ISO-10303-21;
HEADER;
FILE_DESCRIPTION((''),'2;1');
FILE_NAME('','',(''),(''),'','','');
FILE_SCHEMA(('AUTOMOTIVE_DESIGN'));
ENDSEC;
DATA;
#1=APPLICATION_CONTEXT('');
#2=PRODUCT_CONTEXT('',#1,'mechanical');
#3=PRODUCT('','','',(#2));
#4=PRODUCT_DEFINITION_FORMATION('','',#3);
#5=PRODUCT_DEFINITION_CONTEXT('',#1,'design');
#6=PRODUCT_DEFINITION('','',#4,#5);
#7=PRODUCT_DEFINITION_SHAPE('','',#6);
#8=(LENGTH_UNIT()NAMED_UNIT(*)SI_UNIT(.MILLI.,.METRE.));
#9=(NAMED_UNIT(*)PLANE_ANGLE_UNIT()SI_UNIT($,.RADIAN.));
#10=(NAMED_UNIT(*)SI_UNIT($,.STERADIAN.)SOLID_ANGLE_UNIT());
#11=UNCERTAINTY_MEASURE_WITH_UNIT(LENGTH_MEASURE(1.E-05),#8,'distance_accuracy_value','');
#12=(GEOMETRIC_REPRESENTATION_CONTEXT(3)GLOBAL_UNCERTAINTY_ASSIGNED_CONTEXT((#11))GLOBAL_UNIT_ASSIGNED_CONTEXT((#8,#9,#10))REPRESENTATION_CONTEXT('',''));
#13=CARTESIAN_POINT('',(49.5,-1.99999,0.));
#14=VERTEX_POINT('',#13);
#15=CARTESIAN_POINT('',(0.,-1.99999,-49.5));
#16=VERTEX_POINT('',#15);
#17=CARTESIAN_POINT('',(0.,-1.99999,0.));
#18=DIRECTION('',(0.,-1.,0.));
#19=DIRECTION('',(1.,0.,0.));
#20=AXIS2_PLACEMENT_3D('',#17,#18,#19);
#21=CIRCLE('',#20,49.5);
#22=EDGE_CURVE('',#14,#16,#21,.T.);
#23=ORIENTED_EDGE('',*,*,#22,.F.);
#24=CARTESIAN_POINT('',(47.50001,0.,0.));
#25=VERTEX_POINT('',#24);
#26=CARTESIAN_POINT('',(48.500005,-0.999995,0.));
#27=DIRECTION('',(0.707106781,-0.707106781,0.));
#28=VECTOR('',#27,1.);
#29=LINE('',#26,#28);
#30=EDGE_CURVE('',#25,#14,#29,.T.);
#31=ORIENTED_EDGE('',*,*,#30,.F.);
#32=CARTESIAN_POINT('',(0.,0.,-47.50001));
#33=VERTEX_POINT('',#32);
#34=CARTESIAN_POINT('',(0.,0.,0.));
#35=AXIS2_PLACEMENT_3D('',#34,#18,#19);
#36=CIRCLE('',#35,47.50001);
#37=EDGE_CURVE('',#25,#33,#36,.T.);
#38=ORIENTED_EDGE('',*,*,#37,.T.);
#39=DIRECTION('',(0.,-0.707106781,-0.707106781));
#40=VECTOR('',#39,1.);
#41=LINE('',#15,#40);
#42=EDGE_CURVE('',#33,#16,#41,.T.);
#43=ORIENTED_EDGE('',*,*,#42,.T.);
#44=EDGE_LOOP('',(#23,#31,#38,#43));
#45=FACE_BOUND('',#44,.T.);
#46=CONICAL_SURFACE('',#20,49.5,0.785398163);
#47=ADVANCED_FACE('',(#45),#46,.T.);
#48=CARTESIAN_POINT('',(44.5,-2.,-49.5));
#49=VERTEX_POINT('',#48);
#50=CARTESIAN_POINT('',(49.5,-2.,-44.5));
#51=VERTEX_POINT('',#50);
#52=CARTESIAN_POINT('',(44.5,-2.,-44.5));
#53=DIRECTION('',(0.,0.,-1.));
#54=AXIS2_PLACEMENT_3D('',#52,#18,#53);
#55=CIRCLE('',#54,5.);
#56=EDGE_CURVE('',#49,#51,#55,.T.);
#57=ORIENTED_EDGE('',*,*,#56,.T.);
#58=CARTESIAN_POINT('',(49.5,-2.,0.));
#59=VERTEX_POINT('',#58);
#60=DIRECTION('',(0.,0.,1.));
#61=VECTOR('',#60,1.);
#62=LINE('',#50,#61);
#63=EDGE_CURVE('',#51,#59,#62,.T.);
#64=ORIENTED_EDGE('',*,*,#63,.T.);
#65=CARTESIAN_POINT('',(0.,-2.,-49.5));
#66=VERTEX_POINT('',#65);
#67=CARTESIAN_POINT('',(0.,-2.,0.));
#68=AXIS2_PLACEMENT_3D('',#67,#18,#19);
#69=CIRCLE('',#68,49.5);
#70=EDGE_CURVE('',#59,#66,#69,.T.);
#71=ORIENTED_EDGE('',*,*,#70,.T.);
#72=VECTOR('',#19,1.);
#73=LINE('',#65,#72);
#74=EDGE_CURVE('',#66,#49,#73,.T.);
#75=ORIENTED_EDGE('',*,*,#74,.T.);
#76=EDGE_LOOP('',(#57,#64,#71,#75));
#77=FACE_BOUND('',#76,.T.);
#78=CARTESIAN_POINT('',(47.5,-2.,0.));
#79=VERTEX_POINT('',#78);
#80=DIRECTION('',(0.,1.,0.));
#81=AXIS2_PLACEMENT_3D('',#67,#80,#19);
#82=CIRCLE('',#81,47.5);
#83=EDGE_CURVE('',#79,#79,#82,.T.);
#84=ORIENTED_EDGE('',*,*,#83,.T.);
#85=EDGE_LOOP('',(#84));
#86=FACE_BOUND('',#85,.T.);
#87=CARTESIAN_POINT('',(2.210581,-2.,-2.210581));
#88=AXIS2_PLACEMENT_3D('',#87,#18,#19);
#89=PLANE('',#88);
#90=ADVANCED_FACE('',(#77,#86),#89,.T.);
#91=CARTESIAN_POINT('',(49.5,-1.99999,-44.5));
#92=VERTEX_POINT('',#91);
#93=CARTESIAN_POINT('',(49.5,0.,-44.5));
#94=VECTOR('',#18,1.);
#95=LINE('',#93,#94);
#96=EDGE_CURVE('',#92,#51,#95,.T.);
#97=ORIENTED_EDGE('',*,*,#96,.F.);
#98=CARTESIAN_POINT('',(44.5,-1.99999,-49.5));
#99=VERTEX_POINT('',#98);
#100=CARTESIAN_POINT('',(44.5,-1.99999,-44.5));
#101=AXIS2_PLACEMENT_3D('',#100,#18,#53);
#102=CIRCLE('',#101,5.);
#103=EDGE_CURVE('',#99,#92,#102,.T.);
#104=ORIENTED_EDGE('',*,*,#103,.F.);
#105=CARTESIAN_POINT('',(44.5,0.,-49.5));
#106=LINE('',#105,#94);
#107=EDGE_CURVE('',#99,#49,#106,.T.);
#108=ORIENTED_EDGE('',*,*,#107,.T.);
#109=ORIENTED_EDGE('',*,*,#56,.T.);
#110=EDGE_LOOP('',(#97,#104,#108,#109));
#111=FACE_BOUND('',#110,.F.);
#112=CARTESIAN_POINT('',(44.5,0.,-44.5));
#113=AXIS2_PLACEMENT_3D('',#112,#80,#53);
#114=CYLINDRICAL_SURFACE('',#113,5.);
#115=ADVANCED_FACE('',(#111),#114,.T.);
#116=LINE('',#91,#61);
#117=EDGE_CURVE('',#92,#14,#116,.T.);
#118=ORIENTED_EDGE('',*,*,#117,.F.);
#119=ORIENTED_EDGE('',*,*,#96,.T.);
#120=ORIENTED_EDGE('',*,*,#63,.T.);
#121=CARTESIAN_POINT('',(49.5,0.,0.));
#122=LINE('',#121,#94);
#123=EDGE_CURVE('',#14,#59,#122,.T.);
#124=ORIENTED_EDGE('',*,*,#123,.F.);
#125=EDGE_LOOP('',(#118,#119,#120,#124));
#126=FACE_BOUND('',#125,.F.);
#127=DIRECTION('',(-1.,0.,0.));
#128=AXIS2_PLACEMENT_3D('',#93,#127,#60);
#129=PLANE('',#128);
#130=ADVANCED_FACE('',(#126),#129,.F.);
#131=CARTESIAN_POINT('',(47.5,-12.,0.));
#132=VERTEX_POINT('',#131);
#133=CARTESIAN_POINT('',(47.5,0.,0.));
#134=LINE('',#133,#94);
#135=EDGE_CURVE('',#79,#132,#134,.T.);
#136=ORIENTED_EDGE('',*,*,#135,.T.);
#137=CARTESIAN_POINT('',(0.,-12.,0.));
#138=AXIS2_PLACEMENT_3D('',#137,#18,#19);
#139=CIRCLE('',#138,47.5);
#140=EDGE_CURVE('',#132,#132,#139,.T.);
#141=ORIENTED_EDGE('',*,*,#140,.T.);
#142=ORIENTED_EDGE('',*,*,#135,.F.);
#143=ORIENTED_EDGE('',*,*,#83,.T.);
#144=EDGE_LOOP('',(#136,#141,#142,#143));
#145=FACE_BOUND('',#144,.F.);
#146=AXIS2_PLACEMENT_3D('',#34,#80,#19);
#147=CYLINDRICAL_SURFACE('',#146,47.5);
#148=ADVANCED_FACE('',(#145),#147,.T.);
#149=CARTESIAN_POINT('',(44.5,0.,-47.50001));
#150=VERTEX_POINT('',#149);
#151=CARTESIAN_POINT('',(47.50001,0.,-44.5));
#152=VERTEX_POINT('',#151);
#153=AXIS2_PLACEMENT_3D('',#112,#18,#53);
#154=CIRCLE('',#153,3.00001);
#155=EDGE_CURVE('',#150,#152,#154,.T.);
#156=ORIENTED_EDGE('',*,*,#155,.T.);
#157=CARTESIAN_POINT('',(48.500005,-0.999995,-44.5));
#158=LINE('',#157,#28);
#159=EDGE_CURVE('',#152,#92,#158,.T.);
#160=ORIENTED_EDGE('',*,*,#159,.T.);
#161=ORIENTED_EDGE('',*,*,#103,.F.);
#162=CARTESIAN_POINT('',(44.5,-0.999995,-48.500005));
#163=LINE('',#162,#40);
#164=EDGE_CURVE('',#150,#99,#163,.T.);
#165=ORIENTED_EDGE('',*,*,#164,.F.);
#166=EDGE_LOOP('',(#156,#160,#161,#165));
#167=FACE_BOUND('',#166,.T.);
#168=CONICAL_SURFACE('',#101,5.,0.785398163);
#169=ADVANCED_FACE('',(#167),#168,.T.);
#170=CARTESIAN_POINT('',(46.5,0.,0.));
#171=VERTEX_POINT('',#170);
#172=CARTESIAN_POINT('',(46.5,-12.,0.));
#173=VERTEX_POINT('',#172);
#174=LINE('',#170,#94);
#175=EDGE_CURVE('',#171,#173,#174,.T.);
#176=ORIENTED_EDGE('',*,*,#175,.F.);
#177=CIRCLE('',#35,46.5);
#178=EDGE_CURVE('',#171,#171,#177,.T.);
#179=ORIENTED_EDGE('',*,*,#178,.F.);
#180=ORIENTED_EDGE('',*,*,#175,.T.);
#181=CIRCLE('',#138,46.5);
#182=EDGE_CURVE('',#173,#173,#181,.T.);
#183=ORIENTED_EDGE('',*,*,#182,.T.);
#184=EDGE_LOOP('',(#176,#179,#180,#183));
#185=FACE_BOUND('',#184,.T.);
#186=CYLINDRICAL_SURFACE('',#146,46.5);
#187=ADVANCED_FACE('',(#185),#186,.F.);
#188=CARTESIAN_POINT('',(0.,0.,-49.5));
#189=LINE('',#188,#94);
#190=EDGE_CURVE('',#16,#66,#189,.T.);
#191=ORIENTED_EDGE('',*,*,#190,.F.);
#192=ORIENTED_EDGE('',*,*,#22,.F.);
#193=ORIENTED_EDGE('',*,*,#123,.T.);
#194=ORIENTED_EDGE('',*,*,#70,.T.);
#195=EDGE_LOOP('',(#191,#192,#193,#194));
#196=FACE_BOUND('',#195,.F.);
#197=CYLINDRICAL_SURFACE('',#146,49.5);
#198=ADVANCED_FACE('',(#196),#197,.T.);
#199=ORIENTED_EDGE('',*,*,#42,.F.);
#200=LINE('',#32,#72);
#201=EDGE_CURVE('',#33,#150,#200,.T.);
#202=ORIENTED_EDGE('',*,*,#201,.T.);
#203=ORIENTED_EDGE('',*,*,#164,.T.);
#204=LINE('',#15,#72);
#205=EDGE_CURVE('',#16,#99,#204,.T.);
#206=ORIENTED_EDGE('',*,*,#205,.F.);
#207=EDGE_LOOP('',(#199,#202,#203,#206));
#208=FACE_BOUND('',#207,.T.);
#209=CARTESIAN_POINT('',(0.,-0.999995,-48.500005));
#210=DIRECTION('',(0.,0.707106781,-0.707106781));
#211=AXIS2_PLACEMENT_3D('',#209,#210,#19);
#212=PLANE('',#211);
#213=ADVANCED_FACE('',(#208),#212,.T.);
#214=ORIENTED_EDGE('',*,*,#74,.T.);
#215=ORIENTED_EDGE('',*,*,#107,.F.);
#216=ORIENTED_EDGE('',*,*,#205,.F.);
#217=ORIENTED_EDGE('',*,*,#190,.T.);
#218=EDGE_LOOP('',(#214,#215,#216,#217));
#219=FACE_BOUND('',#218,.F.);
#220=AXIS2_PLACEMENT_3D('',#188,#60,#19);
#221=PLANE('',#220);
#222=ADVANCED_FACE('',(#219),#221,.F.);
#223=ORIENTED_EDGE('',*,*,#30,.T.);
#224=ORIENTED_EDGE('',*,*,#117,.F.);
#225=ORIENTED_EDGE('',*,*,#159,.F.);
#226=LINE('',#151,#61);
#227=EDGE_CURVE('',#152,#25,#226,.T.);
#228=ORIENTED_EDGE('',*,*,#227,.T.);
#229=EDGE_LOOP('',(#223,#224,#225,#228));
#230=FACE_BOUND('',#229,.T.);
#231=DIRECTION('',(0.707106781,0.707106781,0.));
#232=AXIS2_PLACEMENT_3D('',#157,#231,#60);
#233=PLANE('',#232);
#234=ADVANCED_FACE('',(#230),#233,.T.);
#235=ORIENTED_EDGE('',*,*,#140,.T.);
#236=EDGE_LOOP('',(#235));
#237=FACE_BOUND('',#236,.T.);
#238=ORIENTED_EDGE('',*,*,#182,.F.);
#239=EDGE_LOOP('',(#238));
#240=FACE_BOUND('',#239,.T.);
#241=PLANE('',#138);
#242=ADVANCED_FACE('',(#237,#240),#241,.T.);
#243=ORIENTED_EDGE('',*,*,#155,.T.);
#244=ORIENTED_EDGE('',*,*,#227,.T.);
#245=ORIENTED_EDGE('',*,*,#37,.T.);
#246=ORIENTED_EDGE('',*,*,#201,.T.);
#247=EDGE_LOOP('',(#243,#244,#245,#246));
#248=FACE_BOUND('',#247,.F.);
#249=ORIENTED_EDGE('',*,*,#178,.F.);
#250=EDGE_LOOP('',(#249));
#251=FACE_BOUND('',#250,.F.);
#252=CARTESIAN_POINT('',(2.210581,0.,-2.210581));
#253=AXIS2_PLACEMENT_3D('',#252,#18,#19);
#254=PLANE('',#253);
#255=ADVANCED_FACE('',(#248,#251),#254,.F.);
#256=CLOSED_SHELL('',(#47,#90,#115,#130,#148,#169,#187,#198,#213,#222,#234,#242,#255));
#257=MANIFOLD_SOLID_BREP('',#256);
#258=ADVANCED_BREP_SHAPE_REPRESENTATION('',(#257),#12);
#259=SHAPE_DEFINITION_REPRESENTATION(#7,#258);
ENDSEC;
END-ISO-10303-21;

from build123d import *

# Parameters (mm, degrees)
F0_R     = 47.5
F0_R_2   = 46.5
F1_DEPTH = 2
F2_DEPTH = 12
F3_SIZE  = 1.99999


# Not quite as in the source:
# - a fillet or chamfer is up to 0.001 mm smaller than in the source, because OpenCascade refuses the exact size


with BuildPart() as f1:
    # F0 (on Front) → F1 (new body)
    with BuildSketch(Plane.XZ):
        with BuildLine():
            ThreePointArc((0, -49.5), (35.0017856687, -35.0017856687), (49.5, 0))
            ThreePointArc((49.5, 0), (-35.0017856687, 35.0017856687), (0, -49.5))
        make_face()
        Circle(F0_R, mode=Mode.SUBTRACT)
        Circle(F0_R)
        Circle(F0_R_2, mode=Mode.SUBTRACT)
        with BuildLine():
            Line((49.5, -44.5), (49.5, 0))
            ThreePointArc((49.5, 0), (35.0017856687, -35.0017856687), (0, -49.5))
            Line((0, -49.5), (44.5, -49.5))
            ThreePointArc((44.5, -49.5), (48.0355339059, -48.0355339059), (49.5, -44.5))
        make_face()
    extrude(amount=F1_DEPTH)

    # F0 (on Front) → F2 (join)
    with BuildSketch(Plane.XZ):
        Circle(F0_R)
        Circle(F0_R_2, mode=Mode.SUBTRACT)
    extrude(amount=F2_DEPTH)

    # F3 (size 2 in the source; OpenCascade refuses exactly that, so slightly less here)
    f3_edges = [f1.edges().sort_by_distance(p)[0] for p in [
        (49.5, 0, -22.25),
    ]]
    chamfer(f3_edges, length=F3_SIZE)


solid = f1.part
